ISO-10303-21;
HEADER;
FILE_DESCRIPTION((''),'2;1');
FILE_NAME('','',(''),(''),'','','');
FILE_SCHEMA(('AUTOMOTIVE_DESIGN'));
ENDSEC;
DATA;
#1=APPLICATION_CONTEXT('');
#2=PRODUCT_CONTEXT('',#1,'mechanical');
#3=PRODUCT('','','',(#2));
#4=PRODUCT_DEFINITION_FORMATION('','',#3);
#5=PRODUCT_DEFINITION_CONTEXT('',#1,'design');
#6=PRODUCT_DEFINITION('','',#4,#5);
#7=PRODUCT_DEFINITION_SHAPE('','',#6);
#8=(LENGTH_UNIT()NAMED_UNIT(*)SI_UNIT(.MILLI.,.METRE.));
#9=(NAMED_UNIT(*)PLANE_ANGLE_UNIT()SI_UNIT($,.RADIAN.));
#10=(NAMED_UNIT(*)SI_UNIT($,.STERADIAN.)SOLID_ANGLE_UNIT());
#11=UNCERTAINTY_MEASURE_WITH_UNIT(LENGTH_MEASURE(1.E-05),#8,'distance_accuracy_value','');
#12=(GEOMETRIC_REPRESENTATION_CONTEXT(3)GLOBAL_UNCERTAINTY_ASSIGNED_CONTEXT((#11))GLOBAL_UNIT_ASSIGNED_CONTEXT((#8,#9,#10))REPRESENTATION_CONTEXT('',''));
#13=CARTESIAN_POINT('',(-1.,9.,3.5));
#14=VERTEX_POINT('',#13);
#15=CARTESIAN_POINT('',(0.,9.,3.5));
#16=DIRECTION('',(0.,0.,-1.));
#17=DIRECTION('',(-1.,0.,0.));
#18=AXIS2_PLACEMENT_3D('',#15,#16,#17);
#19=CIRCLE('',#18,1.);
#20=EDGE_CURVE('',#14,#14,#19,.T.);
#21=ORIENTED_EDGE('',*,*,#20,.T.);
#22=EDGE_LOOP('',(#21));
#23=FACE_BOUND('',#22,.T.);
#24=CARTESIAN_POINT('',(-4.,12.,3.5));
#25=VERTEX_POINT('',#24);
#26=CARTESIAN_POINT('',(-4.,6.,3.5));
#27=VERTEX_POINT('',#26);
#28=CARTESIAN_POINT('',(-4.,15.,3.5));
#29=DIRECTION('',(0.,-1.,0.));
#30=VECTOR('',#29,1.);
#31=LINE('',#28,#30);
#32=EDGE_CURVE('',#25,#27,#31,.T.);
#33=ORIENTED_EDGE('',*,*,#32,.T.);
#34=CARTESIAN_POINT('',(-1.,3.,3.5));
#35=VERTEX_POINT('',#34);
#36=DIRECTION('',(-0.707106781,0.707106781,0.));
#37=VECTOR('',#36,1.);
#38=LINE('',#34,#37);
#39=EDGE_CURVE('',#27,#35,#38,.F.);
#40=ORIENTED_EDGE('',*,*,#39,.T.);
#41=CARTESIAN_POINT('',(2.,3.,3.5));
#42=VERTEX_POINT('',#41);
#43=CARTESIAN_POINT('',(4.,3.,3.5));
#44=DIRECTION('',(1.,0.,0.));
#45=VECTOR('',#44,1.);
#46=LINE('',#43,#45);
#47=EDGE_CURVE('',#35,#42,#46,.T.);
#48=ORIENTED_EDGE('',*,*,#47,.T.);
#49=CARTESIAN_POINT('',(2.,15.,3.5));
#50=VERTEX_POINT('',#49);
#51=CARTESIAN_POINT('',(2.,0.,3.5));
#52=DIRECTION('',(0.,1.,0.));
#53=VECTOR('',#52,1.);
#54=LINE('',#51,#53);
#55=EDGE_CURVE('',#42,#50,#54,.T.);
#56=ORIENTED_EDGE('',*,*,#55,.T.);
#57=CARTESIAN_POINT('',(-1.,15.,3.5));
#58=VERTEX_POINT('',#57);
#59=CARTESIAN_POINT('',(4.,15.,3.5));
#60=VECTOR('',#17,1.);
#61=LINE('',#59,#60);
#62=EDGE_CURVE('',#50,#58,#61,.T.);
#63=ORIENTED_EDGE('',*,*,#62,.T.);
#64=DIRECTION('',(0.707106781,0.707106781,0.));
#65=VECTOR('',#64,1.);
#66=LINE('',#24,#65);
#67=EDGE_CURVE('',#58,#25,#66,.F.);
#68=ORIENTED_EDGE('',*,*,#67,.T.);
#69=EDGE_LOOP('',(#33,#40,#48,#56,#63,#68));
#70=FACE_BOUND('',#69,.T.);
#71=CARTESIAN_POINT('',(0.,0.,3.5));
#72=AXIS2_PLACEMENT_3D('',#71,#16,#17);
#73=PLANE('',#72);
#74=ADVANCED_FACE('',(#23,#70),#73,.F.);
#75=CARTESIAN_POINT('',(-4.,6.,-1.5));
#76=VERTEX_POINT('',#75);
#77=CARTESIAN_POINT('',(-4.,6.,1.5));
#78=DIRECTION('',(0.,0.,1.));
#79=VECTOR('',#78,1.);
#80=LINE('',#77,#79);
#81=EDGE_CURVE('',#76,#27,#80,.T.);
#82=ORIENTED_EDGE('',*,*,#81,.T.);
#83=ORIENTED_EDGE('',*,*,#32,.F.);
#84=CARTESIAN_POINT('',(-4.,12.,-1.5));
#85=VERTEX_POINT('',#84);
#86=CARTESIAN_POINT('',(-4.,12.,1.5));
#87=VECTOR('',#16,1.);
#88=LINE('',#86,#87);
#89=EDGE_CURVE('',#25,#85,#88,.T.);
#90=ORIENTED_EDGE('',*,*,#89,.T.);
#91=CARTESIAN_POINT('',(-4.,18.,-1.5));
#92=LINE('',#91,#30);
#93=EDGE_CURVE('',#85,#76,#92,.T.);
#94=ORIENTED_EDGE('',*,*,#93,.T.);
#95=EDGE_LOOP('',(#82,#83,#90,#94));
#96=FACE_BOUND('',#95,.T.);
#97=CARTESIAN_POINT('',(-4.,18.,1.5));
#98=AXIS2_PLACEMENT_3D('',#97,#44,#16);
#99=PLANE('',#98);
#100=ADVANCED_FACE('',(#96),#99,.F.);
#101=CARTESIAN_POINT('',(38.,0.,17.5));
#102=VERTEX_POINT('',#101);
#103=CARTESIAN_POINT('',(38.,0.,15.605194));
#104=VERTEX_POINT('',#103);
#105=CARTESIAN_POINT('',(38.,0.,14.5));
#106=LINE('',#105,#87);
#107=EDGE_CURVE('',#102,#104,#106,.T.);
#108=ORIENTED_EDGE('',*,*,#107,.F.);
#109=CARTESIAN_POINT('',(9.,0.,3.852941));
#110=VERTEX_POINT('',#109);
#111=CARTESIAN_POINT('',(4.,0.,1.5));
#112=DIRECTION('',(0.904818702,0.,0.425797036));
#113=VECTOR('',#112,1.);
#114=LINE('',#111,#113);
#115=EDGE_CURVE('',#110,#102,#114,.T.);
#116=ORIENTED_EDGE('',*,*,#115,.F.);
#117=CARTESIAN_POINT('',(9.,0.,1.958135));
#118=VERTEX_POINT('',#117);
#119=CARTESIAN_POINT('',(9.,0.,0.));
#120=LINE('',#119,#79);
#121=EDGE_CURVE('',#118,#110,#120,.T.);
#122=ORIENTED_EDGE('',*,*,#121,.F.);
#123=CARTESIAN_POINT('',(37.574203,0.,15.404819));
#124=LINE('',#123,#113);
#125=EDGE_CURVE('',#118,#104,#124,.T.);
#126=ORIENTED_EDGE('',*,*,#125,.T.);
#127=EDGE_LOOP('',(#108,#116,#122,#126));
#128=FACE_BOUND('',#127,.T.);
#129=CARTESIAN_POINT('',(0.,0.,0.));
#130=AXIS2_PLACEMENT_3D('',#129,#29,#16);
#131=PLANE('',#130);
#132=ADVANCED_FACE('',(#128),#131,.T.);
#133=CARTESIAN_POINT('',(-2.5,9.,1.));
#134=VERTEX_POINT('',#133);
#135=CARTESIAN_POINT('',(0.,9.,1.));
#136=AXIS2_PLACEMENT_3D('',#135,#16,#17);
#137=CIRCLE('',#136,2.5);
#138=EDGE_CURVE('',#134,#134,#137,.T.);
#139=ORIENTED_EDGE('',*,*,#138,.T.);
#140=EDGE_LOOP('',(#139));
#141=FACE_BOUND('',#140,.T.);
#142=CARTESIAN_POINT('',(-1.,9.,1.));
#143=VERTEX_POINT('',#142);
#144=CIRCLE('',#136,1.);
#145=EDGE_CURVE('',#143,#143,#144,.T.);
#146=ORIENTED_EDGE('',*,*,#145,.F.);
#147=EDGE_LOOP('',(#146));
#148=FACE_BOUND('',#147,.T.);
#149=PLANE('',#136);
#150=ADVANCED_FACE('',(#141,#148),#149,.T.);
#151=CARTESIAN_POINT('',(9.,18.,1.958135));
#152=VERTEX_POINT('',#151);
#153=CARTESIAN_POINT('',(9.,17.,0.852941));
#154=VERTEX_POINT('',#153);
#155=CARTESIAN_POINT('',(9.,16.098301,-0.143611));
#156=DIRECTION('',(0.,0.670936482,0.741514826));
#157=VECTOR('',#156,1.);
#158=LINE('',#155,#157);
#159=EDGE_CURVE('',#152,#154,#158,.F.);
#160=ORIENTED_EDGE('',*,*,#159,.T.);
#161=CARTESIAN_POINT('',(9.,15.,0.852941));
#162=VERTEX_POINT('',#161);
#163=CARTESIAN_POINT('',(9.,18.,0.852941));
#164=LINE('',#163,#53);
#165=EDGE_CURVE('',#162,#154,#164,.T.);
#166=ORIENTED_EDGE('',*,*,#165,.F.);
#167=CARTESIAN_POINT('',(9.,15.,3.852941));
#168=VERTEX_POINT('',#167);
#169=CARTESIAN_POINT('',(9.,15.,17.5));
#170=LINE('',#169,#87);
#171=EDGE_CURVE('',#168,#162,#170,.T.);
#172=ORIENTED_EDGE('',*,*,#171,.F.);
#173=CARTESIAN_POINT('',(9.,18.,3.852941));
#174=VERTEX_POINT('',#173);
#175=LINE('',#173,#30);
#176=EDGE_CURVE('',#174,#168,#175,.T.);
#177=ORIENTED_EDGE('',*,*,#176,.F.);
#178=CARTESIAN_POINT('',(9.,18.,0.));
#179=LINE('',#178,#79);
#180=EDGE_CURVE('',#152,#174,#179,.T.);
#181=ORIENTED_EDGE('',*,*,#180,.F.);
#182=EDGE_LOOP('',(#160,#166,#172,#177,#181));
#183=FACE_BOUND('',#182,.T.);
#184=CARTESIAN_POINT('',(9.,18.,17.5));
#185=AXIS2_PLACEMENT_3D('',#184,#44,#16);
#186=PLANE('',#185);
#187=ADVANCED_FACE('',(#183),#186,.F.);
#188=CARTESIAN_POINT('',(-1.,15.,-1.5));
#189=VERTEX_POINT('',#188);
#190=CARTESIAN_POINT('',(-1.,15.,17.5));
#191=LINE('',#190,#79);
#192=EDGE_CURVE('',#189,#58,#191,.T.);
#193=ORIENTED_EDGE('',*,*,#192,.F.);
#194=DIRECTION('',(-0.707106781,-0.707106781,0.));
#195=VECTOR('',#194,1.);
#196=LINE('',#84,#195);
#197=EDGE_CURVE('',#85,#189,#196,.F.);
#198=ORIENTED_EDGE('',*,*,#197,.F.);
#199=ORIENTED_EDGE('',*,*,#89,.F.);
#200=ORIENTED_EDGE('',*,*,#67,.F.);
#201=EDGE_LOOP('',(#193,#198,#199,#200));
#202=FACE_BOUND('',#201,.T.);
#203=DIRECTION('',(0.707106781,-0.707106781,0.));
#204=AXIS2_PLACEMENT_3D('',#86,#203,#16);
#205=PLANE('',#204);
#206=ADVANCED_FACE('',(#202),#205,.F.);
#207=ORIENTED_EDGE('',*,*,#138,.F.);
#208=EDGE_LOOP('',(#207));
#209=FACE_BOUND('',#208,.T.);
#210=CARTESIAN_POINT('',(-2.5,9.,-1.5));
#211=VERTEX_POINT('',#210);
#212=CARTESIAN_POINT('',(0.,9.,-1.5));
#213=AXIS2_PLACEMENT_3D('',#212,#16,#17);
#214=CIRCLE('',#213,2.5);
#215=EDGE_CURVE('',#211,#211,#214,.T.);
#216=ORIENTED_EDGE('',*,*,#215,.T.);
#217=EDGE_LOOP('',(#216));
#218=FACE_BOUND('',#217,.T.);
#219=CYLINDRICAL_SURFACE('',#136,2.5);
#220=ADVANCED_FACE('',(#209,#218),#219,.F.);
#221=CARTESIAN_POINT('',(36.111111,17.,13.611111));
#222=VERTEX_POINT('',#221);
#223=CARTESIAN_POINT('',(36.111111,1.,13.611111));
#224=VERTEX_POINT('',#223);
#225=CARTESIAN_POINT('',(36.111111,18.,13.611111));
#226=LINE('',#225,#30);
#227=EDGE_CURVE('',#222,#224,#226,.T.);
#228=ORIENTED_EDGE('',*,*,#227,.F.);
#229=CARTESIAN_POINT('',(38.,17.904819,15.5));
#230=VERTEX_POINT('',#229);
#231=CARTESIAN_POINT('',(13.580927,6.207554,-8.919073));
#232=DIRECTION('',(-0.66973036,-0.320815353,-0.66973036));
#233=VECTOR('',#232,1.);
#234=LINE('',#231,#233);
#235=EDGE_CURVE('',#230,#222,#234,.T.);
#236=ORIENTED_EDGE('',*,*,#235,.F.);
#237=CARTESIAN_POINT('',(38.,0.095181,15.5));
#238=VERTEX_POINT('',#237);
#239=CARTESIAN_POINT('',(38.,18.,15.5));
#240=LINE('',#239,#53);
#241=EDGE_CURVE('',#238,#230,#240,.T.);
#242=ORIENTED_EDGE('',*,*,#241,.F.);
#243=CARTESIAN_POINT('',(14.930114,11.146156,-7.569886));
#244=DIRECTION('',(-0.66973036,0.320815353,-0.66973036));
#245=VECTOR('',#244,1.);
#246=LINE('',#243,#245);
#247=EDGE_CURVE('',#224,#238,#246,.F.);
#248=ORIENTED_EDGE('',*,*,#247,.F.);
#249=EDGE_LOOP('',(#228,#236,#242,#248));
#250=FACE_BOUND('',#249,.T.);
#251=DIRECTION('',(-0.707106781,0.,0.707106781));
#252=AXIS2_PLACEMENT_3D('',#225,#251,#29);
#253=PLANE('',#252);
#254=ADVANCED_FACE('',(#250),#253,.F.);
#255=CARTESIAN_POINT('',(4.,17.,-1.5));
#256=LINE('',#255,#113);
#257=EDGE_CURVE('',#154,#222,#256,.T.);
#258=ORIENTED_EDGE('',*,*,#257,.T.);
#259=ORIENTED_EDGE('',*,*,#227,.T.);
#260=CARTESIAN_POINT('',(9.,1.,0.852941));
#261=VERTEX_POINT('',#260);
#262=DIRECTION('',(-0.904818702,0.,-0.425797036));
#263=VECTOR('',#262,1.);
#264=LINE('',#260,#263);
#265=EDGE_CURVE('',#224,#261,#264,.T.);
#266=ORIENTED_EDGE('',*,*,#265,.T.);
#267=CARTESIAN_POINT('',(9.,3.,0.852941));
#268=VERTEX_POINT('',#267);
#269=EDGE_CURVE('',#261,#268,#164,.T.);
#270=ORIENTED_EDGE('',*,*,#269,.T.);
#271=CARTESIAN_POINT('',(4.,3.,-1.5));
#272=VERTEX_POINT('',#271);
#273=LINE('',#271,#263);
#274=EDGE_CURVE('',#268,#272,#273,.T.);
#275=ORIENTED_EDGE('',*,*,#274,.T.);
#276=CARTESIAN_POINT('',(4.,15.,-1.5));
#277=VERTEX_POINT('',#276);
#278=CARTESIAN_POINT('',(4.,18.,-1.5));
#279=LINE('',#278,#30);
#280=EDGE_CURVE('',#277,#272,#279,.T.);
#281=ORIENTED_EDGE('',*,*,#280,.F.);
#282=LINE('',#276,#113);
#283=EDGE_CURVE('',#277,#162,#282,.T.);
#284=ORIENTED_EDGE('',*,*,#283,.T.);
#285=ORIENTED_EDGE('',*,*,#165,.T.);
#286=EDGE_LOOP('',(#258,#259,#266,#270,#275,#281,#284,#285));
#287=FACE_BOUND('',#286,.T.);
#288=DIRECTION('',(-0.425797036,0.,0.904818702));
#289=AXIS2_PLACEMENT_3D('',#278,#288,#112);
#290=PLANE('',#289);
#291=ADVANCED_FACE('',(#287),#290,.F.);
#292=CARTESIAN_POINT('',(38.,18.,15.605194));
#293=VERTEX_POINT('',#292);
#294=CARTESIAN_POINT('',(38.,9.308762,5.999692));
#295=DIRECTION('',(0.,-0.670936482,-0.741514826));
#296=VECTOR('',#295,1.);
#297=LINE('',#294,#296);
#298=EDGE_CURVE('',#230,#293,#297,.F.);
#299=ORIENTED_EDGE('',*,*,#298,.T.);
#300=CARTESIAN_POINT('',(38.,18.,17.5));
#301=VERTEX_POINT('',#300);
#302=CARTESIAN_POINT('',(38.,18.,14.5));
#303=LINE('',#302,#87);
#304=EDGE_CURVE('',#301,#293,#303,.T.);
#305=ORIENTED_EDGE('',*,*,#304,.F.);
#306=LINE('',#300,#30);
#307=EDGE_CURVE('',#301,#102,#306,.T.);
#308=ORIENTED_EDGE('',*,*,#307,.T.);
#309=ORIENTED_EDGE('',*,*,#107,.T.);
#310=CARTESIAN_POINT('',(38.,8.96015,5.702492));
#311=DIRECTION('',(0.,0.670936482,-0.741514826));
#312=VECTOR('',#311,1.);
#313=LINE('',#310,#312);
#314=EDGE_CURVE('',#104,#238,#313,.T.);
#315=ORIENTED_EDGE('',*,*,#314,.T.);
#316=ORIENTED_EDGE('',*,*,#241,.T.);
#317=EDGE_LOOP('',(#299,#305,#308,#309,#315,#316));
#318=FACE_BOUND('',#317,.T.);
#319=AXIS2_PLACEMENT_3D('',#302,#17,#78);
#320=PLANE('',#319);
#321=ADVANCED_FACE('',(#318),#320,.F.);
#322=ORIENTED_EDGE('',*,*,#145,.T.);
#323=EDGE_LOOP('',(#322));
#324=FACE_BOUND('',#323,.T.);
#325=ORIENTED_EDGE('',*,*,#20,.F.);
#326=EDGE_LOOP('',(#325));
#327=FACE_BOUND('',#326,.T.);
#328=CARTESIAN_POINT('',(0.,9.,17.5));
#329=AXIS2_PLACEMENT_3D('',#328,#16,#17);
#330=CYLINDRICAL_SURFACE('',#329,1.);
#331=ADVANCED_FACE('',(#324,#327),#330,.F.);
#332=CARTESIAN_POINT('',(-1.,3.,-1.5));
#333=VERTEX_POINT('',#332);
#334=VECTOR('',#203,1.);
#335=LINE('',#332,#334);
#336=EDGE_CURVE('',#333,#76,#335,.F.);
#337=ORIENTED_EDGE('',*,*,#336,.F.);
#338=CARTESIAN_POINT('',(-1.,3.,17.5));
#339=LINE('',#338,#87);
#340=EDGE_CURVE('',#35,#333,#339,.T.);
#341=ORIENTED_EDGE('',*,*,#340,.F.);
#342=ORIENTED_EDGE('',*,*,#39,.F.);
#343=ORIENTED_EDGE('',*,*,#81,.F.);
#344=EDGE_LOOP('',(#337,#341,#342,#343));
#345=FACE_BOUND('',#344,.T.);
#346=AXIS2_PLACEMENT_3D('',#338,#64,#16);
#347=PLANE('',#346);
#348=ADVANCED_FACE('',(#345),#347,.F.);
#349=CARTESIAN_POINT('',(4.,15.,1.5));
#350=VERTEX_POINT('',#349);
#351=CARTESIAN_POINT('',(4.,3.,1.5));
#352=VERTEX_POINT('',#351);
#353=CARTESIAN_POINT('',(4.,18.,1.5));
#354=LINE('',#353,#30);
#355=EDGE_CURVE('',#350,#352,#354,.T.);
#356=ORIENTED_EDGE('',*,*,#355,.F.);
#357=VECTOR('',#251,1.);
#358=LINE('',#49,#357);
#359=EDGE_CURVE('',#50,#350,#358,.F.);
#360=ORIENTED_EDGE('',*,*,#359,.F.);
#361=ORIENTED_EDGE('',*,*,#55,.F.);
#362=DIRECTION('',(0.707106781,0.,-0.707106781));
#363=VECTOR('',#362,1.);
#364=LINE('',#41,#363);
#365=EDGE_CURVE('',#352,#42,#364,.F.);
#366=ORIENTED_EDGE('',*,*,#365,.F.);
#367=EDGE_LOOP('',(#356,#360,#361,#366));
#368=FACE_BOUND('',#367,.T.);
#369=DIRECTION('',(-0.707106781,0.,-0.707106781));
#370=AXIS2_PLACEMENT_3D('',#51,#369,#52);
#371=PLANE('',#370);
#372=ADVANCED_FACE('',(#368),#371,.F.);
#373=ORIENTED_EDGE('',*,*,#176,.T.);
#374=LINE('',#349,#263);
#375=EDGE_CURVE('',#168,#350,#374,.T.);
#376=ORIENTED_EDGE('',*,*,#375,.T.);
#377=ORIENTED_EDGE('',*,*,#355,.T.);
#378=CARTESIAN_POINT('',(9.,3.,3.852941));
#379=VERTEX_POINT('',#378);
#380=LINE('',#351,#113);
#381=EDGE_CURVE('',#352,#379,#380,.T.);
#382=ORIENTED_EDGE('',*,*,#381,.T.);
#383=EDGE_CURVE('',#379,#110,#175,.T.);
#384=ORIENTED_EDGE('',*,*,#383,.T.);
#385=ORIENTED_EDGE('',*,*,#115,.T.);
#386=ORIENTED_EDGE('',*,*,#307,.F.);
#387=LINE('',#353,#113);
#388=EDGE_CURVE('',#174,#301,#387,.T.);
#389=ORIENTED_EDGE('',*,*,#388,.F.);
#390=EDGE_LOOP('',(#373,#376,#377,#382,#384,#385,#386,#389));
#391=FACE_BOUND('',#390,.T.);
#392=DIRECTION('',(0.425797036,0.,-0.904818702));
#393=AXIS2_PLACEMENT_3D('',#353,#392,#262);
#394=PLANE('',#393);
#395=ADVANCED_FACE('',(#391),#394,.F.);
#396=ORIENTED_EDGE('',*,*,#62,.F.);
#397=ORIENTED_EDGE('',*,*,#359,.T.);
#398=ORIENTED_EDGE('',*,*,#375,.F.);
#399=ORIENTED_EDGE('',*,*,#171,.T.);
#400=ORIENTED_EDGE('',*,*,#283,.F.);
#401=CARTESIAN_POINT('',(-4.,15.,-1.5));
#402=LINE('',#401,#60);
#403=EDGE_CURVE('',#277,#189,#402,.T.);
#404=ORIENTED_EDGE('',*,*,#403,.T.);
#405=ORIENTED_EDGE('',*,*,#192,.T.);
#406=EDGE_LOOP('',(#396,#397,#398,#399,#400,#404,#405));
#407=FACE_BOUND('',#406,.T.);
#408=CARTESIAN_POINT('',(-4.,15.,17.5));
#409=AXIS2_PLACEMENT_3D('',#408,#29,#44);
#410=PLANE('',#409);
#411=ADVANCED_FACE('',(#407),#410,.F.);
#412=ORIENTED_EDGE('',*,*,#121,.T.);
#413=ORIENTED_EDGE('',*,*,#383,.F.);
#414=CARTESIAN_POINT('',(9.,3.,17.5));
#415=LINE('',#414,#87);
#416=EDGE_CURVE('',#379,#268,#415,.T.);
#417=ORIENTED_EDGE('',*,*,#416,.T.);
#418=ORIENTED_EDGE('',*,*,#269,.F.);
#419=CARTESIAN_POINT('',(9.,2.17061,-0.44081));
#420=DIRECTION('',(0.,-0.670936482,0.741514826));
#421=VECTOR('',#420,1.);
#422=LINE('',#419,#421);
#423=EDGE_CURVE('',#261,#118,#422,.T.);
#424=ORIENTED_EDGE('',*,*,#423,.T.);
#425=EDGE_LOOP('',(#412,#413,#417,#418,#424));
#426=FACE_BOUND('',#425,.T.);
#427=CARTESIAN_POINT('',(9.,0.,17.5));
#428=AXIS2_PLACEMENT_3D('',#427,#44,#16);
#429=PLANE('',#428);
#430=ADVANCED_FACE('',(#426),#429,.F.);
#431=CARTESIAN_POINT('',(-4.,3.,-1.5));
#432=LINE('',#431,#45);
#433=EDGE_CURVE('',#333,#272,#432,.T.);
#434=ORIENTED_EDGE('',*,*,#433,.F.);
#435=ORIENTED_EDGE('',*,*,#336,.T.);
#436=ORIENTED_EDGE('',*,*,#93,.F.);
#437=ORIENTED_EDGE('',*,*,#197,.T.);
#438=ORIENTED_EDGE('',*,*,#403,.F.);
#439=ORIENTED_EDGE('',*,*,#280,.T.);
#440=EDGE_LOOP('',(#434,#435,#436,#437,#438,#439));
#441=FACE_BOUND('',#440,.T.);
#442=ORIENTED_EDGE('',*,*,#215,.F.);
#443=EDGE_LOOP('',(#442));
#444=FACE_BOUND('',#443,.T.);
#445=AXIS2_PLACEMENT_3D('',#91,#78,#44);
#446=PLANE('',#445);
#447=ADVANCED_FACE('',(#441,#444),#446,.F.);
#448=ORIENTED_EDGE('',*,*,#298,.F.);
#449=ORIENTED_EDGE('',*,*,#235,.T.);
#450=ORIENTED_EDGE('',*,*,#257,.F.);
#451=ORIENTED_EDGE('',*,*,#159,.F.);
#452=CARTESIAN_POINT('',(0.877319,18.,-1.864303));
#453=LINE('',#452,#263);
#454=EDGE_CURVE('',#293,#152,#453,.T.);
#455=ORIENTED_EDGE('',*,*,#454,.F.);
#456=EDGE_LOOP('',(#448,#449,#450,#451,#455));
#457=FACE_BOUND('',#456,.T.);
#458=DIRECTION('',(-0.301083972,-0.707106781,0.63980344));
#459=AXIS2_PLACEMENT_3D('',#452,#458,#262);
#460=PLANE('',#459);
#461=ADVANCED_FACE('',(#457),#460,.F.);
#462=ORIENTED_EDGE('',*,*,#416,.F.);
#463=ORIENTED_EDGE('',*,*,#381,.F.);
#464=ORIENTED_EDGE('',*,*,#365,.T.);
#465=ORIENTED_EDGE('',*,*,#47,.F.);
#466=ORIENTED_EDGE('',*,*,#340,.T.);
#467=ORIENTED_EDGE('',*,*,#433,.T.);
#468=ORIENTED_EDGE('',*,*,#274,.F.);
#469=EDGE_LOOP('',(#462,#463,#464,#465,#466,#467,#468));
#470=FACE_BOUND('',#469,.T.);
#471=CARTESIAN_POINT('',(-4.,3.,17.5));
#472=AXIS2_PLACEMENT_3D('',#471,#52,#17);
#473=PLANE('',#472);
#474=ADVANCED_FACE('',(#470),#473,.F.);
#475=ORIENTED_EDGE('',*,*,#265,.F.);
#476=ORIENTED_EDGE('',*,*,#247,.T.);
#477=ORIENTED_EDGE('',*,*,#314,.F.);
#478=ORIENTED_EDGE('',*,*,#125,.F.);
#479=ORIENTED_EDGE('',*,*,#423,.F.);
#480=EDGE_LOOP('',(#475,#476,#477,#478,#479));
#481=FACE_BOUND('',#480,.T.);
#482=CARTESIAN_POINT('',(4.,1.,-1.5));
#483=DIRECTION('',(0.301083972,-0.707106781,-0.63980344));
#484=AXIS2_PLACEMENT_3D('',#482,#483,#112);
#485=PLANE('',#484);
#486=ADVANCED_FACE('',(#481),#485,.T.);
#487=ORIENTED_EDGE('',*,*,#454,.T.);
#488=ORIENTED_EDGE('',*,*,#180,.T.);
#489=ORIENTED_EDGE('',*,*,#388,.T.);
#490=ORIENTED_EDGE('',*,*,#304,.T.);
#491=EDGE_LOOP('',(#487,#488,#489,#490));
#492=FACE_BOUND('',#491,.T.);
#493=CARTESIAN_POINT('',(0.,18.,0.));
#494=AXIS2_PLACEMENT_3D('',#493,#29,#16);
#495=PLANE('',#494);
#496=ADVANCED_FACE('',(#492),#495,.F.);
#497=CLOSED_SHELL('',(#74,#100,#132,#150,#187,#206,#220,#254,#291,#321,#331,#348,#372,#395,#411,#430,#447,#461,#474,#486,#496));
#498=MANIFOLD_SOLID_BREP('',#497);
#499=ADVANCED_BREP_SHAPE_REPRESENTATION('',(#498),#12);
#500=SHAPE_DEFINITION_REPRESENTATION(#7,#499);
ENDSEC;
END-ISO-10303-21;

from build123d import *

# Parameters (mm, degrees)
SALIENTE_EXTRUIR1_DEPTH = 18
CROQUIS2_R              = 2.5
CORTAR_EXTRUIR1_DEPTH   = 2.5
CROQUIS3_W              = 13
CROQUIS3_H              = 3
CORTAR_EXTRUIR2_DEPTH   = 47.14108798
CHAFL_N1_SIZE           = 1
CHAFL_N2_SIZE           = 1
CHAFL_N2_SIZE2          = 2.087588248
CROQUIS4_W              = 8
CROQUIS4_H              = 12
SALIENTE_EXTRUIR2_DEPTH = 2
CROQUIS5_R              = 1
CORTAR_EXTRUIR3_DEPTH   = 46.169126624
CHAFL_N3_SIZE           = 3
CHAFL_N4_SIZE           = 2


with BuildPart() as part:
    # Croquis1 → Saliente-Extruir1 (new body)
    with BuildSketch(Plane(origin=(0, 0, 0), x_dir=(1, 0, 0), z_dir=(0, 1, 0))):
        Polygon((4, -1.5), (38, -17.5), (38, -14.5), (4, 1.5), (-4, 1.5), (-4, -1.5), align=None)
    extrude(amount=SALIENTE_EXTRUIR1_DEPTH)

    # Croquis2 → Cortar-Extruir1 (cut)
    with BuildSketch(Plane(origin=(0, 0, -1.5), x_dir=(-1, 0, 0), z_dir=(0, 0, -1))):
        with Locations((0, 9)):
            Circle(CROQUIS2_R)
    extrude(amount=-CORTAR_EXTRUIR1_DEPTH, mode=Mode.SUBTRACT)

    # Croquis3 → Cortar-Extruir2 (cut, through all)
    with BuildSketch(Plane(origin=(0, 0, -1.5), x_dir=(-1, 0, 0), z_dir=(0, 0, -1))):
        with Locations((-2.5, 16.5)):
            Rectangle(CROQUIS3_W, CROQUIS3_H)
        with Locations((-2.5, 1.5)):
            Rectangle(CROQUIS3_W, CROQUIS3_H)
    extrude(amount=-CORTAR_EXTRUIR2_DEPTH, mode=Mode.SUBTRACT)

    # Chaflán1
    chafl_n1_edges = [part.edges().sort_by_distance(p)[0] for p in [
        (23.5, 18, 7.676470588),
        (23.5, 0, 7.676470588),
    ]]
    chamfer(chafl_n1_edges, length=CHAFL_N1_SIZE)

    # Chaflán2
    chafl_n2_edges = [part.edges().sort_by_distance(p)[0] for p in [
        (38, 9, 14.5),
    ]]
    chafl_n2_side = [part.faces().sort_by_distance(p)[0] for p in [
        (38, 9, 16.023643901),
    ]]
    chamfer(chafl_n2_edges, length=CHAFL_N2_SIZE, length2=CHAFL_N2_SIZE2, reference=chafl_n2_side[0])

    # Croquis4 → Saliente-Extruir2 (add)
    with BuildSketch(Plane.XY.offset(1.5)):
        with Locations((0, 9)):
            Rectangle(CROQUIS4_W, CROQUIS4_H)
    extrude(amount=SALIENTE_EXTRUIR2_DEPTH)

    # Croquis5 → Cortar-Extruir3 (cut, through all)
    with BuildSketch(Plane(origin=(0, 0, 1), x_dir=(-1, 0, 0), z_dir=(0, 0, -1))):
        with Locations((0, 9)):
            Circle(CROQUIS5_R)
    extrude(amount=-CORTAR_EXTRUIR3_DEPTH, mode=Mode.SUBTRACT)

    # Chaflán3
    chafl_n3_edges = [part.edges().sort_by_distance(p)[0] for p in [
        (-4, 15, 1),
        (-4, 3, 1),
    ]]
    chamfer(chafl_n3_edges, length=CHAFL_N3_SIZE)

    # Chaflán4
    chafl_n4_edges = [part.edges().sort_by_distance(p)[0] for p in [
        (4, 9, 3.5),
    ]]
    chamfer(chafl_n4_edges, length=CHAFL_N4_SIZE - 0.0001)  # a hair under: the kernel refuses the full size


solid = part.part
